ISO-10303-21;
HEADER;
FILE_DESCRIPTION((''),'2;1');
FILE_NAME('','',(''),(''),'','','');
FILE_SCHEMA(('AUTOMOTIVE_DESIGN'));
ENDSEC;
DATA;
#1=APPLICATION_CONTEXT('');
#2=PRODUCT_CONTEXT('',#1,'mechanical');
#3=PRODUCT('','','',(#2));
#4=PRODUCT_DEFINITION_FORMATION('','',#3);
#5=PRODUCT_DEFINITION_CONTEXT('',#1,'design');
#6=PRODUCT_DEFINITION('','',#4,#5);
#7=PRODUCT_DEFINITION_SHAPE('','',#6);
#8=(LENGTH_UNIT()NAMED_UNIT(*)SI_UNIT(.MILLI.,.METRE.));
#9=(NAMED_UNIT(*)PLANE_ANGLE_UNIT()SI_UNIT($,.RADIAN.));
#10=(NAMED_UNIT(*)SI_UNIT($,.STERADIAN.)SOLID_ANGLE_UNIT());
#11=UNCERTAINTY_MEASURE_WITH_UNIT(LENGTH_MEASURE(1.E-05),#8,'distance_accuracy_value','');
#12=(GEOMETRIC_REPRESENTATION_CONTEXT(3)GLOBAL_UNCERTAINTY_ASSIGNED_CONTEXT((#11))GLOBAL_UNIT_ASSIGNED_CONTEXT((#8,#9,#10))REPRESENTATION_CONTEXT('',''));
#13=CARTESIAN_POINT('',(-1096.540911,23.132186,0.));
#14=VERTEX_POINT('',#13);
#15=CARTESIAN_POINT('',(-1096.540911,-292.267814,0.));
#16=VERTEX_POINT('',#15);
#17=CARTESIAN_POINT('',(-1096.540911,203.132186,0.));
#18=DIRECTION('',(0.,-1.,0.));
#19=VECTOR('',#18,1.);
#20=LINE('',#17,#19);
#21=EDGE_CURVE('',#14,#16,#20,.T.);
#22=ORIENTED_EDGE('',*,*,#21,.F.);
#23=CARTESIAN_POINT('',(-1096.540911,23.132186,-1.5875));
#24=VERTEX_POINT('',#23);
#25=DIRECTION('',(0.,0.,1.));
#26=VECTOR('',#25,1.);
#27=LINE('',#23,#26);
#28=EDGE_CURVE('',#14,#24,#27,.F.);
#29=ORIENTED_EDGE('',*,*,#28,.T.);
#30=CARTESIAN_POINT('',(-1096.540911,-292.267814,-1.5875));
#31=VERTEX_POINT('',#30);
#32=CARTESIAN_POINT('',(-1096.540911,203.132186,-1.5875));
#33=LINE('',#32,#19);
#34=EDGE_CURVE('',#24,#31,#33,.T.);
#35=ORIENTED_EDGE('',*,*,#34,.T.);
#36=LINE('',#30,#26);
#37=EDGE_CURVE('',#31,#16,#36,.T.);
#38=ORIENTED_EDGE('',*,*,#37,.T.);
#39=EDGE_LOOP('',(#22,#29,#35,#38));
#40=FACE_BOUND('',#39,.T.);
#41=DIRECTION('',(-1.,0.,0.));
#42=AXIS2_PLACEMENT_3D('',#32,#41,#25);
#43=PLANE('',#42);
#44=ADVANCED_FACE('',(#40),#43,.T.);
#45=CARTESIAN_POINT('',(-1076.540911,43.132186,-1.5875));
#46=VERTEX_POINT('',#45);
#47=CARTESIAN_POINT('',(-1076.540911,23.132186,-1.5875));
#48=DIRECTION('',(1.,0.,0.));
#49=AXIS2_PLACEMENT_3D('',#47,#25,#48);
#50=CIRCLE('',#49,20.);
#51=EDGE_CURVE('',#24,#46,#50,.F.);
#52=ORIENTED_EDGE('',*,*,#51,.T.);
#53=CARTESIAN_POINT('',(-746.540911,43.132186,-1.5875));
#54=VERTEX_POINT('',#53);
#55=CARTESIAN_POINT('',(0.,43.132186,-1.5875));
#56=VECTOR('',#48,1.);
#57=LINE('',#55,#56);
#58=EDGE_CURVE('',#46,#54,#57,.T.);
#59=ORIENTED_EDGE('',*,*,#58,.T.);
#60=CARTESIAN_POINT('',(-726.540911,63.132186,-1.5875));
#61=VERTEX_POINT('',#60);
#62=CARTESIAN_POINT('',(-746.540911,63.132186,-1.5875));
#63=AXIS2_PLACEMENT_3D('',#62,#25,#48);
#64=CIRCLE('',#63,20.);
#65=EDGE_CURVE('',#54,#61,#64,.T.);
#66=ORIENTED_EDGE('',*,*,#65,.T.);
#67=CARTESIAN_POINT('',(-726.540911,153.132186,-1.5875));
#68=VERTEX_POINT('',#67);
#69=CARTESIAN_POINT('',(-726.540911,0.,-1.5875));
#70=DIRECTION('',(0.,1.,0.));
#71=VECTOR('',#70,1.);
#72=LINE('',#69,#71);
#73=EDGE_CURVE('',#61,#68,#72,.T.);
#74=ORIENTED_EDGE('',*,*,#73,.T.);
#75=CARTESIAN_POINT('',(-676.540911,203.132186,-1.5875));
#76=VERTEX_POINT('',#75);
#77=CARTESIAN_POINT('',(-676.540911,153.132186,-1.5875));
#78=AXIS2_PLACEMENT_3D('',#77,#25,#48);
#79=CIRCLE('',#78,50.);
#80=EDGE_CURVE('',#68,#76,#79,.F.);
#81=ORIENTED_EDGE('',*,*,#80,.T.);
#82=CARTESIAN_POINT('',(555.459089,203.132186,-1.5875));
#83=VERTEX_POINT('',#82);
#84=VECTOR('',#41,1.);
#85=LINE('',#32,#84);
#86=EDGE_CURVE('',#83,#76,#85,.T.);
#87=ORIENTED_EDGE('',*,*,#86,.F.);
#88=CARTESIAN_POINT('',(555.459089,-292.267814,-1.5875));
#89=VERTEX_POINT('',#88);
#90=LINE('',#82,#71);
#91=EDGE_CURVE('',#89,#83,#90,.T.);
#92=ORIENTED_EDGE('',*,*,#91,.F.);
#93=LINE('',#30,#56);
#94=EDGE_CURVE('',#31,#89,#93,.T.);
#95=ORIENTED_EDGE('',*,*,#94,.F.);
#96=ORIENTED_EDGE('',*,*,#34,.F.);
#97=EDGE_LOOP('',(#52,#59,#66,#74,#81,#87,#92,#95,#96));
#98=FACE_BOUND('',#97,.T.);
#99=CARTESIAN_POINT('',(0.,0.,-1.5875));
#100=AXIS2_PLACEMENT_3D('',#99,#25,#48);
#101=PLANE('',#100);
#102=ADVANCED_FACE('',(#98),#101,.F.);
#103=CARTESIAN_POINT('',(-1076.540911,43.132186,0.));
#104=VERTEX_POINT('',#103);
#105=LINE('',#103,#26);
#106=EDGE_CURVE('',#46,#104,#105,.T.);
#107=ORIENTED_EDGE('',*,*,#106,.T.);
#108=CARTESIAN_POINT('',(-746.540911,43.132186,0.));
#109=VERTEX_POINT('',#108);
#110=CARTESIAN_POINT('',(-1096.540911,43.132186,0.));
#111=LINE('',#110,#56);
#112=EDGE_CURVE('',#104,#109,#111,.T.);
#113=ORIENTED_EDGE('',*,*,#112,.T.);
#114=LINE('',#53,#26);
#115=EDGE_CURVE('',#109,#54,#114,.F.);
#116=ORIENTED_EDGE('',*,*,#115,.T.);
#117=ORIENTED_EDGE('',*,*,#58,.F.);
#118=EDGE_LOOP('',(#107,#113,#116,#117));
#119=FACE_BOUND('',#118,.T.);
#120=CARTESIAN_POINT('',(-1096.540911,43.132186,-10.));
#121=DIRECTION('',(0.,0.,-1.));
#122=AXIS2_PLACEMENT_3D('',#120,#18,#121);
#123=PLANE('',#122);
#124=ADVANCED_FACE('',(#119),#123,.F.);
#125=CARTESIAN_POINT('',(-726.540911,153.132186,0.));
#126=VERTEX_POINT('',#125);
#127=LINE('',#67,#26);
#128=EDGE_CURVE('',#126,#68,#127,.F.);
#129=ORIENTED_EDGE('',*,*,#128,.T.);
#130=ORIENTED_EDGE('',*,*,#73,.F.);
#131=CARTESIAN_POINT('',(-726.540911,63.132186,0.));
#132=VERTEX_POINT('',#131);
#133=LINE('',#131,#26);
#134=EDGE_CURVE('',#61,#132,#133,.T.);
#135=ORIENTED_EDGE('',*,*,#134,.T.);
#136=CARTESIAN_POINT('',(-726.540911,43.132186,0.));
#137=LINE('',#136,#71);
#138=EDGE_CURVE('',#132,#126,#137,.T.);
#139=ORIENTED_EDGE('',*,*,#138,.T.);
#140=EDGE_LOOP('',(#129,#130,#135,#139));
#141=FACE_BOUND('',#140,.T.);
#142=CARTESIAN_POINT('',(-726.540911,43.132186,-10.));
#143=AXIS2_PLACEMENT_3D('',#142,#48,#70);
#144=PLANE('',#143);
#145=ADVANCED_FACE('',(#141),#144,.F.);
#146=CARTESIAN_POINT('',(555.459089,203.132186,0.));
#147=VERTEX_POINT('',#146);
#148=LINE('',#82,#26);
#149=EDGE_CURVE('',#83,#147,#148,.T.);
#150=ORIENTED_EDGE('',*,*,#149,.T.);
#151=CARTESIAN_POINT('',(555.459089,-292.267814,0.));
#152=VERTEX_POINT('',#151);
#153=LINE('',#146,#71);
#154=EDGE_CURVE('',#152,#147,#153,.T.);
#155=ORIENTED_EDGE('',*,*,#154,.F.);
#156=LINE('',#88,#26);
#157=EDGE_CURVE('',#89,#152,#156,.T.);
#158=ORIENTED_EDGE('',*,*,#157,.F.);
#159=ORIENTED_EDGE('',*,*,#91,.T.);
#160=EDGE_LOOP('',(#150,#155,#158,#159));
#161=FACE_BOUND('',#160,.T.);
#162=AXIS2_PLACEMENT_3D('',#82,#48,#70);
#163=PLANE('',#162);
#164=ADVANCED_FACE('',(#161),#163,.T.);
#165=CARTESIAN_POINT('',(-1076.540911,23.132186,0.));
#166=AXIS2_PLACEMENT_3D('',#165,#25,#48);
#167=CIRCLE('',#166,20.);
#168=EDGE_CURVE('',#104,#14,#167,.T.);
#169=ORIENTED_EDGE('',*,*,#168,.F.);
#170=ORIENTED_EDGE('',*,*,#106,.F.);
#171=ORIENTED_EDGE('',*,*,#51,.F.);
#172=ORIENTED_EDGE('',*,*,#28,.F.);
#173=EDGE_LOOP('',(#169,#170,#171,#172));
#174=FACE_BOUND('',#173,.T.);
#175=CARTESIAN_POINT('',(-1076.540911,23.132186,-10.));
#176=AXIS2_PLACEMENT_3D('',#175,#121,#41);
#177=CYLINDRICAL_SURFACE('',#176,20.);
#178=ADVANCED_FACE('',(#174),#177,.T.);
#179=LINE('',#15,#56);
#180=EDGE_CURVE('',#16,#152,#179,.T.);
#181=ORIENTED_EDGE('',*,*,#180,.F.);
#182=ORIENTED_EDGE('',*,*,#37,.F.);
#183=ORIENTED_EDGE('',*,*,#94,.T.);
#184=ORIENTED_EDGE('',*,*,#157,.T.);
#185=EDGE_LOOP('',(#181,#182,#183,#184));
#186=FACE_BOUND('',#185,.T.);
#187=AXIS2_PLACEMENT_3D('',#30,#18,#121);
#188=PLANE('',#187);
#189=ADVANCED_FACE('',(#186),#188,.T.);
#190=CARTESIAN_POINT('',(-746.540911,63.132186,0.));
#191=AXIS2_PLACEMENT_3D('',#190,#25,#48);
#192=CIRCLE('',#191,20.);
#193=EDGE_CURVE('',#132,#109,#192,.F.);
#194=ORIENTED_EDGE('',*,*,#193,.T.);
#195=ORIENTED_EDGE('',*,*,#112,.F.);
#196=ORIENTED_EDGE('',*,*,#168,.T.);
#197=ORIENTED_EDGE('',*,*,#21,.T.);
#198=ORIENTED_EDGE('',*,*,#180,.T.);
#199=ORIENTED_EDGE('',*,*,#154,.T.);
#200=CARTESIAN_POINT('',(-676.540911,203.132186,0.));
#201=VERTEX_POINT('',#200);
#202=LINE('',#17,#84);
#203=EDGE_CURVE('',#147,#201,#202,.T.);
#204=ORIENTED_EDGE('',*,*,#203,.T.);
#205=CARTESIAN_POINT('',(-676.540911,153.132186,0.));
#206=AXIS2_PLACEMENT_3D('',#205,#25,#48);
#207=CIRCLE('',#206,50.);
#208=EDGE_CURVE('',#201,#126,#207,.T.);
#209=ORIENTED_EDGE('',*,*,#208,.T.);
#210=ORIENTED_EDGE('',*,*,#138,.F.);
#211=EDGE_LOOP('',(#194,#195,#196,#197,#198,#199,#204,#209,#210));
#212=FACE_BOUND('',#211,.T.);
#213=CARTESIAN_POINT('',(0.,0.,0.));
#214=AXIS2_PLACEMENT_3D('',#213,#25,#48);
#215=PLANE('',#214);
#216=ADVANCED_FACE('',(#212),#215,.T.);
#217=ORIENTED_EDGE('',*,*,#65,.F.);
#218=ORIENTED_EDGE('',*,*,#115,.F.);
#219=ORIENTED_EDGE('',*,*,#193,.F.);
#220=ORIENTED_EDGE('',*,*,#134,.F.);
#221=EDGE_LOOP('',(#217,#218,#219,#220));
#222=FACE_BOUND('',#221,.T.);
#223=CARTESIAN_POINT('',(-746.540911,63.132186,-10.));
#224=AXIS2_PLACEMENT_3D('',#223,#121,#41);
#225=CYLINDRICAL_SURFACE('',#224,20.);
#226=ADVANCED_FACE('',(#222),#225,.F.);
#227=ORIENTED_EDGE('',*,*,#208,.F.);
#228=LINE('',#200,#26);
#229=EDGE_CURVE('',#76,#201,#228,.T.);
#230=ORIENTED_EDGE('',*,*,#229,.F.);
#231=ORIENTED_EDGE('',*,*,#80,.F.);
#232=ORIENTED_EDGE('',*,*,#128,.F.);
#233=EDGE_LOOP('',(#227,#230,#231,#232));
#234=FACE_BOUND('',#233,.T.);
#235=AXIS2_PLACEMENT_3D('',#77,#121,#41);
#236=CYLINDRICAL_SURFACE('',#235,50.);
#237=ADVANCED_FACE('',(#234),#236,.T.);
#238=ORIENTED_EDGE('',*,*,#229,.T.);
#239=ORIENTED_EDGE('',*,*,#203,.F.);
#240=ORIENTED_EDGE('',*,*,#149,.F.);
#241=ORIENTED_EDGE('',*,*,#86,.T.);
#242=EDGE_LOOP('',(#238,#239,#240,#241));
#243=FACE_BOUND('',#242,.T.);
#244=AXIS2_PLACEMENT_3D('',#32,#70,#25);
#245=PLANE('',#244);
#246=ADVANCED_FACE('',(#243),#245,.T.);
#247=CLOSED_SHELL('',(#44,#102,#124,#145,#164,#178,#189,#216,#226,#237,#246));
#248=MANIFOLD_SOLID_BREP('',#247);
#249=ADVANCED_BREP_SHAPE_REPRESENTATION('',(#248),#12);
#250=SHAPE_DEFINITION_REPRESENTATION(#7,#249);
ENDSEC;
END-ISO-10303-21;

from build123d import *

# Parameters (mm, degrees)
CROQUIS1_W            = 1652
CROQUIS1_H            = 495.4
BRIDA_BASE1_DEPTH     = 1.5875
CROQUIS21_W           = 370
CROQUIS21_H           = 160
CORTAR_EXTRUIR2_DEPTH = 10
REDONDEO4_R           = 20
REDONDEO5_R           = 50
REDONDEO6_R           = 20


# Sheet-metal steps are written as plain solids
with BuildPart() as part:
    # Croquis1 → Brida base1 (new body)
    with BuildSketch(Plane.XY):
        with Locations((-270.54091127, -44.567814371)):
            Rectangle(CROQUIS1_W, CROQUIS1_H)
    extrude(amount=-BRIDA_BASE1_DEPTH)

    # Croquis21 → Cortar-Extruir2 (cut)
    with BuildSketch(Plane.XY):
        with Locations((-911.54091127, 123.132185629)):
            Rectangle(CROQUIS21_W, CROQUIS21_H)
    extrude(amount=-CORTAR_EXTRUIR2_DEPTH, mode=Mode.SUBTRACT)

    # Redondeo4
    redondeo4_edges = [part.edges().sort_by_distance(p)[0] for p in [
        (-726.54091127, 43.132185629, -0.79375),
    ]]
    fillet(redondeo4_edges, radius=REDONDEO4_R)

    # Redondeo5
    redondeo5_edges = [part.edges().sort_by_distance(p)[0] for p in [
        (-726.54091127, 203.132185629, -0.79375),
    ]]
    fillet(redondeo5_edges, radius=REDONDEO5_R)

    # Redondeo6
    redondeo6_edges = [part.edges().sort_by_distance(p)[0] for p in [
        (-1096.54091127, 43.132185629, -0.79375),
    ]]
    fillet(redondeo6_edges, radius=REDONDEO6_R)


solid = part.part
